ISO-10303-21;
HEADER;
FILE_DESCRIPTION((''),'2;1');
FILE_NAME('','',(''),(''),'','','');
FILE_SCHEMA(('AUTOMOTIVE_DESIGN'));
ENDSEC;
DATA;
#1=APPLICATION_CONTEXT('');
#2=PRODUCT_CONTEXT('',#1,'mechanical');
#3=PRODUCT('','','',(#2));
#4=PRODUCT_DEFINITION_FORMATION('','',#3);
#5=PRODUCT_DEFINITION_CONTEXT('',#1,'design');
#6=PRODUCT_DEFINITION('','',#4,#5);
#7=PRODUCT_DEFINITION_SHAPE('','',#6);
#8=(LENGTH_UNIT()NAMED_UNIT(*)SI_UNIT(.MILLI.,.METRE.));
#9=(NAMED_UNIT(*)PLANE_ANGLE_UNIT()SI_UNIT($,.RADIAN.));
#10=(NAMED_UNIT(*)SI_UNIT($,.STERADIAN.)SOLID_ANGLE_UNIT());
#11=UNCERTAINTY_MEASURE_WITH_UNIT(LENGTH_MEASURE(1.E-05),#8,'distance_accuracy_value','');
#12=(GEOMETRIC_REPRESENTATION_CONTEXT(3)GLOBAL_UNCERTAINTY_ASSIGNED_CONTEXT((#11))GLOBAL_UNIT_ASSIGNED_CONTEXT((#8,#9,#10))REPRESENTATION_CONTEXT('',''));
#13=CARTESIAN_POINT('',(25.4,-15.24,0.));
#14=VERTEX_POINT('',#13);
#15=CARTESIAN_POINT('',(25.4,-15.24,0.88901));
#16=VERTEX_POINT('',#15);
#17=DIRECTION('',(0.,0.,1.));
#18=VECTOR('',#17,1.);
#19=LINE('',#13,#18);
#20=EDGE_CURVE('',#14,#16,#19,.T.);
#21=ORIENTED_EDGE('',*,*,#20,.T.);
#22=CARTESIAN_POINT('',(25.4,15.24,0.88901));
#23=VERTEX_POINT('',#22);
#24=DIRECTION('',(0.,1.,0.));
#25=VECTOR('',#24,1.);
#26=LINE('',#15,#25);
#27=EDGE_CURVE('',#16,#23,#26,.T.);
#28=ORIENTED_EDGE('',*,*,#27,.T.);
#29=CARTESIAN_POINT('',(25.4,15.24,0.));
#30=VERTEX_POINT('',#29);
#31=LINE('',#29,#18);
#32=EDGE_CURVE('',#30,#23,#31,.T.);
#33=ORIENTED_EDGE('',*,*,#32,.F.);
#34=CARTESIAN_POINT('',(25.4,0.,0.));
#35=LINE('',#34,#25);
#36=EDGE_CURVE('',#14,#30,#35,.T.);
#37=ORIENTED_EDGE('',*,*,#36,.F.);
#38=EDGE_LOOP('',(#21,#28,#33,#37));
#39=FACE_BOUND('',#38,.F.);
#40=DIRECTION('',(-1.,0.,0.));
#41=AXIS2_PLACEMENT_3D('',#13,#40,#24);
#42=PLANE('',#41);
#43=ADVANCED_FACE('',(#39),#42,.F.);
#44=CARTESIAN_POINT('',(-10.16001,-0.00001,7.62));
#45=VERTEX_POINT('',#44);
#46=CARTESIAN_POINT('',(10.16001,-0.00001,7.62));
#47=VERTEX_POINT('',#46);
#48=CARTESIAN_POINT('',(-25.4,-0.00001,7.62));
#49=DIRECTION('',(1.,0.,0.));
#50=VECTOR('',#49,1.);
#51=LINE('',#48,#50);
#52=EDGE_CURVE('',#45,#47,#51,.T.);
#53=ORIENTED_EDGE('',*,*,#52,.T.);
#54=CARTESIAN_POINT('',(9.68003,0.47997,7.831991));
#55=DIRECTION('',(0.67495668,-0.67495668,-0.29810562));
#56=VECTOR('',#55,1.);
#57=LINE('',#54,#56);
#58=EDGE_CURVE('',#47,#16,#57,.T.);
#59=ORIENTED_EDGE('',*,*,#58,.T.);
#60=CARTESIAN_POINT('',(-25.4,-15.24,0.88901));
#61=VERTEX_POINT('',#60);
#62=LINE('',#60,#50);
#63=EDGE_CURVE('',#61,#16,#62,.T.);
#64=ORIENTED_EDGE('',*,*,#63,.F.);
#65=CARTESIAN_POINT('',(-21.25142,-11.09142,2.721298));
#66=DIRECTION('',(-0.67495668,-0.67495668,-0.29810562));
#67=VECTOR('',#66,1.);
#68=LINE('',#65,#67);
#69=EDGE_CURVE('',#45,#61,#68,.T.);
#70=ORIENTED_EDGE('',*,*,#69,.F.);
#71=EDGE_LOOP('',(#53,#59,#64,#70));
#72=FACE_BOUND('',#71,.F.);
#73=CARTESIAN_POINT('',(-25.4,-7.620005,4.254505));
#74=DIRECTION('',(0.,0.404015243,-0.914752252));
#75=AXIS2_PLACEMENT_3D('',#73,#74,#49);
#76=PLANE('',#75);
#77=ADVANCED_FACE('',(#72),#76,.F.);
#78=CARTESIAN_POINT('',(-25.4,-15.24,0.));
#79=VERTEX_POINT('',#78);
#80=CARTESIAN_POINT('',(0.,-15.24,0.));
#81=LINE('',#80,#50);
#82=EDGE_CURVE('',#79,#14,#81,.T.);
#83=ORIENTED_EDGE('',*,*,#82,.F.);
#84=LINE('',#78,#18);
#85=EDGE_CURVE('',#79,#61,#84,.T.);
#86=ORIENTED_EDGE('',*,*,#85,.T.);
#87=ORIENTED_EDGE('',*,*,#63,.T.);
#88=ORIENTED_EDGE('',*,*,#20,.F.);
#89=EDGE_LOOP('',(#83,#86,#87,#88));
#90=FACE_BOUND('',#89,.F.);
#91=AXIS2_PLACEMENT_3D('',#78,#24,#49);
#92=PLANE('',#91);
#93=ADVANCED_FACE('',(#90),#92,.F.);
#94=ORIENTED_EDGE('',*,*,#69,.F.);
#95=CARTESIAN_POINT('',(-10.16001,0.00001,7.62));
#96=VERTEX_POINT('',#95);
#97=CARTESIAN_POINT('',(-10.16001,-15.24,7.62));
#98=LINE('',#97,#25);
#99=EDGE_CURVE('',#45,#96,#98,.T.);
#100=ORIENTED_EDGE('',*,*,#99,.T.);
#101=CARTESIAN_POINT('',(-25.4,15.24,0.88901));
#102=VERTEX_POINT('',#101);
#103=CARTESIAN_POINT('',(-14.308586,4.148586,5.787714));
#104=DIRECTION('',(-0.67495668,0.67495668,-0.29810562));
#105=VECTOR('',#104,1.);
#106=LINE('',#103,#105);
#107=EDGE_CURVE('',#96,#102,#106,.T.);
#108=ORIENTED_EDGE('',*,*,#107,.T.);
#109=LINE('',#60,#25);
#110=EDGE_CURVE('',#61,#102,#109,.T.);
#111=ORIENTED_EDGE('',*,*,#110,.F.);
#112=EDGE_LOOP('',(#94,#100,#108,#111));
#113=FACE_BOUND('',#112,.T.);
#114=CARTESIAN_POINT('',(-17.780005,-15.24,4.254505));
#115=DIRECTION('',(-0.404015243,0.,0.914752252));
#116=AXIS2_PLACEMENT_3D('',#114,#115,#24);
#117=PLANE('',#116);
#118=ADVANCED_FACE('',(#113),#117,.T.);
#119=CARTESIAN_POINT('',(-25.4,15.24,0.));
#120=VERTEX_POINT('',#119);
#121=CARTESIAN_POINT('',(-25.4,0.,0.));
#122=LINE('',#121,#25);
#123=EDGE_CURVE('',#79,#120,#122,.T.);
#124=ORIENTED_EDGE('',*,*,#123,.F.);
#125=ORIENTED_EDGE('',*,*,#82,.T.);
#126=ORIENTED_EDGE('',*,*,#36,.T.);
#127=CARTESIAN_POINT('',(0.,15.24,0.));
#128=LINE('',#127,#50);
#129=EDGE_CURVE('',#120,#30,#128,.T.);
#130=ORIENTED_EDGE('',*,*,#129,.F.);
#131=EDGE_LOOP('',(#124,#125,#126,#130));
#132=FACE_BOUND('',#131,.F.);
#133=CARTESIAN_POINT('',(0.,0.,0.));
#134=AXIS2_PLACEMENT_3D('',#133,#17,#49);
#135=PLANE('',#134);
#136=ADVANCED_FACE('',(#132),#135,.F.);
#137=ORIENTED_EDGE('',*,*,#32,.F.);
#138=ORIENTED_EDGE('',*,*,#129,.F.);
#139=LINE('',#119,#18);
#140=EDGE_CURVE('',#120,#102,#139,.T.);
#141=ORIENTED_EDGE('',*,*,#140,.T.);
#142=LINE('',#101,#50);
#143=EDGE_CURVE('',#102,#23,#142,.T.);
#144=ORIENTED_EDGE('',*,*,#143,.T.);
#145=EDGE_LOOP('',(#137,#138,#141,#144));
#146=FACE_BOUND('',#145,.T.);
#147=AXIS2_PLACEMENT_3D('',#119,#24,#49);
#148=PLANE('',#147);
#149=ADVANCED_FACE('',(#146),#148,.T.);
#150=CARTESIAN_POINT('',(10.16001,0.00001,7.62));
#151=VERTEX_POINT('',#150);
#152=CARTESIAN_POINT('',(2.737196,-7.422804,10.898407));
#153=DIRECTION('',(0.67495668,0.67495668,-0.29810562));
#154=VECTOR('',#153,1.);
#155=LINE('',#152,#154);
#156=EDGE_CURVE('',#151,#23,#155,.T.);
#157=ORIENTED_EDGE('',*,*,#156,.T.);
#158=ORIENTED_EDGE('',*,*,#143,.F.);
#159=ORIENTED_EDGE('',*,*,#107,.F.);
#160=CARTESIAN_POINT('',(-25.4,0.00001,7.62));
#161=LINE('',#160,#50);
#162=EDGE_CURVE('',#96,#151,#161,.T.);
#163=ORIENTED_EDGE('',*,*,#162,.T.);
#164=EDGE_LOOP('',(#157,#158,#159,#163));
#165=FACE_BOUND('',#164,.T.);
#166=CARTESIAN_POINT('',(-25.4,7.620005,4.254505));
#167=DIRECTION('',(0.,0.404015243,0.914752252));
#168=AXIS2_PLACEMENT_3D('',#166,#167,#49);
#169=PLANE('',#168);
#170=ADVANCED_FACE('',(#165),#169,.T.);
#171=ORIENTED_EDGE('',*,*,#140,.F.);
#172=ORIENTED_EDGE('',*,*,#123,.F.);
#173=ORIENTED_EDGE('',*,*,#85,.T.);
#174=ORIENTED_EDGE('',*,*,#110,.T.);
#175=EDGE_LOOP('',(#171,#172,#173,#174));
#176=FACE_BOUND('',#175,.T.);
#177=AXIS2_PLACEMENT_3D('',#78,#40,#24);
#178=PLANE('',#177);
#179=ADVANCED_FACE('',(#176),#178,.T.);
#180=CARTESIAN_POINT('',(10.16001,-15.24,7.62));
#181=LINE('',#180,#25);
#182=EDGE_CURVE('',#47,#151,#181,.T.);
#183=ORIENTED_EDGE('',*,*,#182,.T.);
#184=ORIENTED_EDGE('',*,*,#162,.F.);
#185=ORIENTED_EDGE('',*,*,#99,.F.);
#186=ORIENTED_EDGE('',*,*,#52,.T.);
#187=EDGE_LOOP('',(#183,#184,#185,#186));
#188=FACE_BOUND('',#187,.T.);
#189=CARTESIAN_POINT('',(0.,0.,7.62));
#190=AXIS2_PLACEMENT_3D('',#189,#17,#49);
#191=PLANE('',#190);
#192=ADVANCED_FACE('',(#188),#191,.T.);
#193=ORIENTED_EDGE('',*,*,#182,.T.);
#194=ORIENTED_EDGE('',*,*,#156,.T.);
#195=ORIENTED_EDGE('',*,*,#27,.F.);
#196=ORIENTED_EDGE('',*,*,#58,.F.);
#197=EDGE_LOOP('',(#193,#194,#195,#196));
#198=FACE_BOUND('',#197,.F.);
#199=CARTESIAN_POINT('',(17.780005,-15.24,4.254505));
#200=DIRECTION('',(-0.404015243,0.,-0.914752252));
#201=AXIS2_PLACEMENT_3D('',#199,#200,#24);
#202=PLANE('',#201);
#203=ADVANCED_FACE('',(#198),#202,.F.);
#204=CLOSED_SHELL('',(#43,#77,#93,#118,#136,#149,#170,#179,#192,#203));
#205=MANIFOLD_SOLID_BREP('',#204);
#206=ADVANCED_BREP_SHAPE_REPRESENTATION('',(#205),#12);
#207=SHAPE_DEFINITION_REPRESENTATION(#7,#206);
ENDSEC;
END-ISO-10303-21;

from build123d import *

# Parameters (mm, degrees)
F0_W     = 50.8
F0_H     = 30.48
F1_DEPTH = 7.62
F2_SIZE2 = 6.73099
F2_SIZE  = 15.23999


# Not quite as in the source:
# - a fillet or chamfer is up to 0.001 mm smaller than in the source, because OpenCascade refuses the exact size


with BuildPart() as f1:
    # F0 (on Top) → F1 (new body)
    with BuildSketch(Plane.XY):
        Rectangle(F0_W, F0_H)
    extrude(amount=F1_DEPTH)

    # F2 (size 15.24 and 6.731 in the source; OpenCascade refuses exactly that, so slightly less here)
    f2_edges = [f1.edges().sort_by_distance(p)[0] for p in [
        (-25.4, 0, 7.62),
        (0, 15.24, 7.62),
        (0, -15.24, 7.62),
        (25.4, 0, 7.62),
    ]]
    f2_side = f1.faces().sort_by_distance((0, 0, 7.62))[0]
    chamfer(f2_edges, length=F2_SIZE, length2=F2_SIZE2, reference=f2_side)


solid = f1.part
